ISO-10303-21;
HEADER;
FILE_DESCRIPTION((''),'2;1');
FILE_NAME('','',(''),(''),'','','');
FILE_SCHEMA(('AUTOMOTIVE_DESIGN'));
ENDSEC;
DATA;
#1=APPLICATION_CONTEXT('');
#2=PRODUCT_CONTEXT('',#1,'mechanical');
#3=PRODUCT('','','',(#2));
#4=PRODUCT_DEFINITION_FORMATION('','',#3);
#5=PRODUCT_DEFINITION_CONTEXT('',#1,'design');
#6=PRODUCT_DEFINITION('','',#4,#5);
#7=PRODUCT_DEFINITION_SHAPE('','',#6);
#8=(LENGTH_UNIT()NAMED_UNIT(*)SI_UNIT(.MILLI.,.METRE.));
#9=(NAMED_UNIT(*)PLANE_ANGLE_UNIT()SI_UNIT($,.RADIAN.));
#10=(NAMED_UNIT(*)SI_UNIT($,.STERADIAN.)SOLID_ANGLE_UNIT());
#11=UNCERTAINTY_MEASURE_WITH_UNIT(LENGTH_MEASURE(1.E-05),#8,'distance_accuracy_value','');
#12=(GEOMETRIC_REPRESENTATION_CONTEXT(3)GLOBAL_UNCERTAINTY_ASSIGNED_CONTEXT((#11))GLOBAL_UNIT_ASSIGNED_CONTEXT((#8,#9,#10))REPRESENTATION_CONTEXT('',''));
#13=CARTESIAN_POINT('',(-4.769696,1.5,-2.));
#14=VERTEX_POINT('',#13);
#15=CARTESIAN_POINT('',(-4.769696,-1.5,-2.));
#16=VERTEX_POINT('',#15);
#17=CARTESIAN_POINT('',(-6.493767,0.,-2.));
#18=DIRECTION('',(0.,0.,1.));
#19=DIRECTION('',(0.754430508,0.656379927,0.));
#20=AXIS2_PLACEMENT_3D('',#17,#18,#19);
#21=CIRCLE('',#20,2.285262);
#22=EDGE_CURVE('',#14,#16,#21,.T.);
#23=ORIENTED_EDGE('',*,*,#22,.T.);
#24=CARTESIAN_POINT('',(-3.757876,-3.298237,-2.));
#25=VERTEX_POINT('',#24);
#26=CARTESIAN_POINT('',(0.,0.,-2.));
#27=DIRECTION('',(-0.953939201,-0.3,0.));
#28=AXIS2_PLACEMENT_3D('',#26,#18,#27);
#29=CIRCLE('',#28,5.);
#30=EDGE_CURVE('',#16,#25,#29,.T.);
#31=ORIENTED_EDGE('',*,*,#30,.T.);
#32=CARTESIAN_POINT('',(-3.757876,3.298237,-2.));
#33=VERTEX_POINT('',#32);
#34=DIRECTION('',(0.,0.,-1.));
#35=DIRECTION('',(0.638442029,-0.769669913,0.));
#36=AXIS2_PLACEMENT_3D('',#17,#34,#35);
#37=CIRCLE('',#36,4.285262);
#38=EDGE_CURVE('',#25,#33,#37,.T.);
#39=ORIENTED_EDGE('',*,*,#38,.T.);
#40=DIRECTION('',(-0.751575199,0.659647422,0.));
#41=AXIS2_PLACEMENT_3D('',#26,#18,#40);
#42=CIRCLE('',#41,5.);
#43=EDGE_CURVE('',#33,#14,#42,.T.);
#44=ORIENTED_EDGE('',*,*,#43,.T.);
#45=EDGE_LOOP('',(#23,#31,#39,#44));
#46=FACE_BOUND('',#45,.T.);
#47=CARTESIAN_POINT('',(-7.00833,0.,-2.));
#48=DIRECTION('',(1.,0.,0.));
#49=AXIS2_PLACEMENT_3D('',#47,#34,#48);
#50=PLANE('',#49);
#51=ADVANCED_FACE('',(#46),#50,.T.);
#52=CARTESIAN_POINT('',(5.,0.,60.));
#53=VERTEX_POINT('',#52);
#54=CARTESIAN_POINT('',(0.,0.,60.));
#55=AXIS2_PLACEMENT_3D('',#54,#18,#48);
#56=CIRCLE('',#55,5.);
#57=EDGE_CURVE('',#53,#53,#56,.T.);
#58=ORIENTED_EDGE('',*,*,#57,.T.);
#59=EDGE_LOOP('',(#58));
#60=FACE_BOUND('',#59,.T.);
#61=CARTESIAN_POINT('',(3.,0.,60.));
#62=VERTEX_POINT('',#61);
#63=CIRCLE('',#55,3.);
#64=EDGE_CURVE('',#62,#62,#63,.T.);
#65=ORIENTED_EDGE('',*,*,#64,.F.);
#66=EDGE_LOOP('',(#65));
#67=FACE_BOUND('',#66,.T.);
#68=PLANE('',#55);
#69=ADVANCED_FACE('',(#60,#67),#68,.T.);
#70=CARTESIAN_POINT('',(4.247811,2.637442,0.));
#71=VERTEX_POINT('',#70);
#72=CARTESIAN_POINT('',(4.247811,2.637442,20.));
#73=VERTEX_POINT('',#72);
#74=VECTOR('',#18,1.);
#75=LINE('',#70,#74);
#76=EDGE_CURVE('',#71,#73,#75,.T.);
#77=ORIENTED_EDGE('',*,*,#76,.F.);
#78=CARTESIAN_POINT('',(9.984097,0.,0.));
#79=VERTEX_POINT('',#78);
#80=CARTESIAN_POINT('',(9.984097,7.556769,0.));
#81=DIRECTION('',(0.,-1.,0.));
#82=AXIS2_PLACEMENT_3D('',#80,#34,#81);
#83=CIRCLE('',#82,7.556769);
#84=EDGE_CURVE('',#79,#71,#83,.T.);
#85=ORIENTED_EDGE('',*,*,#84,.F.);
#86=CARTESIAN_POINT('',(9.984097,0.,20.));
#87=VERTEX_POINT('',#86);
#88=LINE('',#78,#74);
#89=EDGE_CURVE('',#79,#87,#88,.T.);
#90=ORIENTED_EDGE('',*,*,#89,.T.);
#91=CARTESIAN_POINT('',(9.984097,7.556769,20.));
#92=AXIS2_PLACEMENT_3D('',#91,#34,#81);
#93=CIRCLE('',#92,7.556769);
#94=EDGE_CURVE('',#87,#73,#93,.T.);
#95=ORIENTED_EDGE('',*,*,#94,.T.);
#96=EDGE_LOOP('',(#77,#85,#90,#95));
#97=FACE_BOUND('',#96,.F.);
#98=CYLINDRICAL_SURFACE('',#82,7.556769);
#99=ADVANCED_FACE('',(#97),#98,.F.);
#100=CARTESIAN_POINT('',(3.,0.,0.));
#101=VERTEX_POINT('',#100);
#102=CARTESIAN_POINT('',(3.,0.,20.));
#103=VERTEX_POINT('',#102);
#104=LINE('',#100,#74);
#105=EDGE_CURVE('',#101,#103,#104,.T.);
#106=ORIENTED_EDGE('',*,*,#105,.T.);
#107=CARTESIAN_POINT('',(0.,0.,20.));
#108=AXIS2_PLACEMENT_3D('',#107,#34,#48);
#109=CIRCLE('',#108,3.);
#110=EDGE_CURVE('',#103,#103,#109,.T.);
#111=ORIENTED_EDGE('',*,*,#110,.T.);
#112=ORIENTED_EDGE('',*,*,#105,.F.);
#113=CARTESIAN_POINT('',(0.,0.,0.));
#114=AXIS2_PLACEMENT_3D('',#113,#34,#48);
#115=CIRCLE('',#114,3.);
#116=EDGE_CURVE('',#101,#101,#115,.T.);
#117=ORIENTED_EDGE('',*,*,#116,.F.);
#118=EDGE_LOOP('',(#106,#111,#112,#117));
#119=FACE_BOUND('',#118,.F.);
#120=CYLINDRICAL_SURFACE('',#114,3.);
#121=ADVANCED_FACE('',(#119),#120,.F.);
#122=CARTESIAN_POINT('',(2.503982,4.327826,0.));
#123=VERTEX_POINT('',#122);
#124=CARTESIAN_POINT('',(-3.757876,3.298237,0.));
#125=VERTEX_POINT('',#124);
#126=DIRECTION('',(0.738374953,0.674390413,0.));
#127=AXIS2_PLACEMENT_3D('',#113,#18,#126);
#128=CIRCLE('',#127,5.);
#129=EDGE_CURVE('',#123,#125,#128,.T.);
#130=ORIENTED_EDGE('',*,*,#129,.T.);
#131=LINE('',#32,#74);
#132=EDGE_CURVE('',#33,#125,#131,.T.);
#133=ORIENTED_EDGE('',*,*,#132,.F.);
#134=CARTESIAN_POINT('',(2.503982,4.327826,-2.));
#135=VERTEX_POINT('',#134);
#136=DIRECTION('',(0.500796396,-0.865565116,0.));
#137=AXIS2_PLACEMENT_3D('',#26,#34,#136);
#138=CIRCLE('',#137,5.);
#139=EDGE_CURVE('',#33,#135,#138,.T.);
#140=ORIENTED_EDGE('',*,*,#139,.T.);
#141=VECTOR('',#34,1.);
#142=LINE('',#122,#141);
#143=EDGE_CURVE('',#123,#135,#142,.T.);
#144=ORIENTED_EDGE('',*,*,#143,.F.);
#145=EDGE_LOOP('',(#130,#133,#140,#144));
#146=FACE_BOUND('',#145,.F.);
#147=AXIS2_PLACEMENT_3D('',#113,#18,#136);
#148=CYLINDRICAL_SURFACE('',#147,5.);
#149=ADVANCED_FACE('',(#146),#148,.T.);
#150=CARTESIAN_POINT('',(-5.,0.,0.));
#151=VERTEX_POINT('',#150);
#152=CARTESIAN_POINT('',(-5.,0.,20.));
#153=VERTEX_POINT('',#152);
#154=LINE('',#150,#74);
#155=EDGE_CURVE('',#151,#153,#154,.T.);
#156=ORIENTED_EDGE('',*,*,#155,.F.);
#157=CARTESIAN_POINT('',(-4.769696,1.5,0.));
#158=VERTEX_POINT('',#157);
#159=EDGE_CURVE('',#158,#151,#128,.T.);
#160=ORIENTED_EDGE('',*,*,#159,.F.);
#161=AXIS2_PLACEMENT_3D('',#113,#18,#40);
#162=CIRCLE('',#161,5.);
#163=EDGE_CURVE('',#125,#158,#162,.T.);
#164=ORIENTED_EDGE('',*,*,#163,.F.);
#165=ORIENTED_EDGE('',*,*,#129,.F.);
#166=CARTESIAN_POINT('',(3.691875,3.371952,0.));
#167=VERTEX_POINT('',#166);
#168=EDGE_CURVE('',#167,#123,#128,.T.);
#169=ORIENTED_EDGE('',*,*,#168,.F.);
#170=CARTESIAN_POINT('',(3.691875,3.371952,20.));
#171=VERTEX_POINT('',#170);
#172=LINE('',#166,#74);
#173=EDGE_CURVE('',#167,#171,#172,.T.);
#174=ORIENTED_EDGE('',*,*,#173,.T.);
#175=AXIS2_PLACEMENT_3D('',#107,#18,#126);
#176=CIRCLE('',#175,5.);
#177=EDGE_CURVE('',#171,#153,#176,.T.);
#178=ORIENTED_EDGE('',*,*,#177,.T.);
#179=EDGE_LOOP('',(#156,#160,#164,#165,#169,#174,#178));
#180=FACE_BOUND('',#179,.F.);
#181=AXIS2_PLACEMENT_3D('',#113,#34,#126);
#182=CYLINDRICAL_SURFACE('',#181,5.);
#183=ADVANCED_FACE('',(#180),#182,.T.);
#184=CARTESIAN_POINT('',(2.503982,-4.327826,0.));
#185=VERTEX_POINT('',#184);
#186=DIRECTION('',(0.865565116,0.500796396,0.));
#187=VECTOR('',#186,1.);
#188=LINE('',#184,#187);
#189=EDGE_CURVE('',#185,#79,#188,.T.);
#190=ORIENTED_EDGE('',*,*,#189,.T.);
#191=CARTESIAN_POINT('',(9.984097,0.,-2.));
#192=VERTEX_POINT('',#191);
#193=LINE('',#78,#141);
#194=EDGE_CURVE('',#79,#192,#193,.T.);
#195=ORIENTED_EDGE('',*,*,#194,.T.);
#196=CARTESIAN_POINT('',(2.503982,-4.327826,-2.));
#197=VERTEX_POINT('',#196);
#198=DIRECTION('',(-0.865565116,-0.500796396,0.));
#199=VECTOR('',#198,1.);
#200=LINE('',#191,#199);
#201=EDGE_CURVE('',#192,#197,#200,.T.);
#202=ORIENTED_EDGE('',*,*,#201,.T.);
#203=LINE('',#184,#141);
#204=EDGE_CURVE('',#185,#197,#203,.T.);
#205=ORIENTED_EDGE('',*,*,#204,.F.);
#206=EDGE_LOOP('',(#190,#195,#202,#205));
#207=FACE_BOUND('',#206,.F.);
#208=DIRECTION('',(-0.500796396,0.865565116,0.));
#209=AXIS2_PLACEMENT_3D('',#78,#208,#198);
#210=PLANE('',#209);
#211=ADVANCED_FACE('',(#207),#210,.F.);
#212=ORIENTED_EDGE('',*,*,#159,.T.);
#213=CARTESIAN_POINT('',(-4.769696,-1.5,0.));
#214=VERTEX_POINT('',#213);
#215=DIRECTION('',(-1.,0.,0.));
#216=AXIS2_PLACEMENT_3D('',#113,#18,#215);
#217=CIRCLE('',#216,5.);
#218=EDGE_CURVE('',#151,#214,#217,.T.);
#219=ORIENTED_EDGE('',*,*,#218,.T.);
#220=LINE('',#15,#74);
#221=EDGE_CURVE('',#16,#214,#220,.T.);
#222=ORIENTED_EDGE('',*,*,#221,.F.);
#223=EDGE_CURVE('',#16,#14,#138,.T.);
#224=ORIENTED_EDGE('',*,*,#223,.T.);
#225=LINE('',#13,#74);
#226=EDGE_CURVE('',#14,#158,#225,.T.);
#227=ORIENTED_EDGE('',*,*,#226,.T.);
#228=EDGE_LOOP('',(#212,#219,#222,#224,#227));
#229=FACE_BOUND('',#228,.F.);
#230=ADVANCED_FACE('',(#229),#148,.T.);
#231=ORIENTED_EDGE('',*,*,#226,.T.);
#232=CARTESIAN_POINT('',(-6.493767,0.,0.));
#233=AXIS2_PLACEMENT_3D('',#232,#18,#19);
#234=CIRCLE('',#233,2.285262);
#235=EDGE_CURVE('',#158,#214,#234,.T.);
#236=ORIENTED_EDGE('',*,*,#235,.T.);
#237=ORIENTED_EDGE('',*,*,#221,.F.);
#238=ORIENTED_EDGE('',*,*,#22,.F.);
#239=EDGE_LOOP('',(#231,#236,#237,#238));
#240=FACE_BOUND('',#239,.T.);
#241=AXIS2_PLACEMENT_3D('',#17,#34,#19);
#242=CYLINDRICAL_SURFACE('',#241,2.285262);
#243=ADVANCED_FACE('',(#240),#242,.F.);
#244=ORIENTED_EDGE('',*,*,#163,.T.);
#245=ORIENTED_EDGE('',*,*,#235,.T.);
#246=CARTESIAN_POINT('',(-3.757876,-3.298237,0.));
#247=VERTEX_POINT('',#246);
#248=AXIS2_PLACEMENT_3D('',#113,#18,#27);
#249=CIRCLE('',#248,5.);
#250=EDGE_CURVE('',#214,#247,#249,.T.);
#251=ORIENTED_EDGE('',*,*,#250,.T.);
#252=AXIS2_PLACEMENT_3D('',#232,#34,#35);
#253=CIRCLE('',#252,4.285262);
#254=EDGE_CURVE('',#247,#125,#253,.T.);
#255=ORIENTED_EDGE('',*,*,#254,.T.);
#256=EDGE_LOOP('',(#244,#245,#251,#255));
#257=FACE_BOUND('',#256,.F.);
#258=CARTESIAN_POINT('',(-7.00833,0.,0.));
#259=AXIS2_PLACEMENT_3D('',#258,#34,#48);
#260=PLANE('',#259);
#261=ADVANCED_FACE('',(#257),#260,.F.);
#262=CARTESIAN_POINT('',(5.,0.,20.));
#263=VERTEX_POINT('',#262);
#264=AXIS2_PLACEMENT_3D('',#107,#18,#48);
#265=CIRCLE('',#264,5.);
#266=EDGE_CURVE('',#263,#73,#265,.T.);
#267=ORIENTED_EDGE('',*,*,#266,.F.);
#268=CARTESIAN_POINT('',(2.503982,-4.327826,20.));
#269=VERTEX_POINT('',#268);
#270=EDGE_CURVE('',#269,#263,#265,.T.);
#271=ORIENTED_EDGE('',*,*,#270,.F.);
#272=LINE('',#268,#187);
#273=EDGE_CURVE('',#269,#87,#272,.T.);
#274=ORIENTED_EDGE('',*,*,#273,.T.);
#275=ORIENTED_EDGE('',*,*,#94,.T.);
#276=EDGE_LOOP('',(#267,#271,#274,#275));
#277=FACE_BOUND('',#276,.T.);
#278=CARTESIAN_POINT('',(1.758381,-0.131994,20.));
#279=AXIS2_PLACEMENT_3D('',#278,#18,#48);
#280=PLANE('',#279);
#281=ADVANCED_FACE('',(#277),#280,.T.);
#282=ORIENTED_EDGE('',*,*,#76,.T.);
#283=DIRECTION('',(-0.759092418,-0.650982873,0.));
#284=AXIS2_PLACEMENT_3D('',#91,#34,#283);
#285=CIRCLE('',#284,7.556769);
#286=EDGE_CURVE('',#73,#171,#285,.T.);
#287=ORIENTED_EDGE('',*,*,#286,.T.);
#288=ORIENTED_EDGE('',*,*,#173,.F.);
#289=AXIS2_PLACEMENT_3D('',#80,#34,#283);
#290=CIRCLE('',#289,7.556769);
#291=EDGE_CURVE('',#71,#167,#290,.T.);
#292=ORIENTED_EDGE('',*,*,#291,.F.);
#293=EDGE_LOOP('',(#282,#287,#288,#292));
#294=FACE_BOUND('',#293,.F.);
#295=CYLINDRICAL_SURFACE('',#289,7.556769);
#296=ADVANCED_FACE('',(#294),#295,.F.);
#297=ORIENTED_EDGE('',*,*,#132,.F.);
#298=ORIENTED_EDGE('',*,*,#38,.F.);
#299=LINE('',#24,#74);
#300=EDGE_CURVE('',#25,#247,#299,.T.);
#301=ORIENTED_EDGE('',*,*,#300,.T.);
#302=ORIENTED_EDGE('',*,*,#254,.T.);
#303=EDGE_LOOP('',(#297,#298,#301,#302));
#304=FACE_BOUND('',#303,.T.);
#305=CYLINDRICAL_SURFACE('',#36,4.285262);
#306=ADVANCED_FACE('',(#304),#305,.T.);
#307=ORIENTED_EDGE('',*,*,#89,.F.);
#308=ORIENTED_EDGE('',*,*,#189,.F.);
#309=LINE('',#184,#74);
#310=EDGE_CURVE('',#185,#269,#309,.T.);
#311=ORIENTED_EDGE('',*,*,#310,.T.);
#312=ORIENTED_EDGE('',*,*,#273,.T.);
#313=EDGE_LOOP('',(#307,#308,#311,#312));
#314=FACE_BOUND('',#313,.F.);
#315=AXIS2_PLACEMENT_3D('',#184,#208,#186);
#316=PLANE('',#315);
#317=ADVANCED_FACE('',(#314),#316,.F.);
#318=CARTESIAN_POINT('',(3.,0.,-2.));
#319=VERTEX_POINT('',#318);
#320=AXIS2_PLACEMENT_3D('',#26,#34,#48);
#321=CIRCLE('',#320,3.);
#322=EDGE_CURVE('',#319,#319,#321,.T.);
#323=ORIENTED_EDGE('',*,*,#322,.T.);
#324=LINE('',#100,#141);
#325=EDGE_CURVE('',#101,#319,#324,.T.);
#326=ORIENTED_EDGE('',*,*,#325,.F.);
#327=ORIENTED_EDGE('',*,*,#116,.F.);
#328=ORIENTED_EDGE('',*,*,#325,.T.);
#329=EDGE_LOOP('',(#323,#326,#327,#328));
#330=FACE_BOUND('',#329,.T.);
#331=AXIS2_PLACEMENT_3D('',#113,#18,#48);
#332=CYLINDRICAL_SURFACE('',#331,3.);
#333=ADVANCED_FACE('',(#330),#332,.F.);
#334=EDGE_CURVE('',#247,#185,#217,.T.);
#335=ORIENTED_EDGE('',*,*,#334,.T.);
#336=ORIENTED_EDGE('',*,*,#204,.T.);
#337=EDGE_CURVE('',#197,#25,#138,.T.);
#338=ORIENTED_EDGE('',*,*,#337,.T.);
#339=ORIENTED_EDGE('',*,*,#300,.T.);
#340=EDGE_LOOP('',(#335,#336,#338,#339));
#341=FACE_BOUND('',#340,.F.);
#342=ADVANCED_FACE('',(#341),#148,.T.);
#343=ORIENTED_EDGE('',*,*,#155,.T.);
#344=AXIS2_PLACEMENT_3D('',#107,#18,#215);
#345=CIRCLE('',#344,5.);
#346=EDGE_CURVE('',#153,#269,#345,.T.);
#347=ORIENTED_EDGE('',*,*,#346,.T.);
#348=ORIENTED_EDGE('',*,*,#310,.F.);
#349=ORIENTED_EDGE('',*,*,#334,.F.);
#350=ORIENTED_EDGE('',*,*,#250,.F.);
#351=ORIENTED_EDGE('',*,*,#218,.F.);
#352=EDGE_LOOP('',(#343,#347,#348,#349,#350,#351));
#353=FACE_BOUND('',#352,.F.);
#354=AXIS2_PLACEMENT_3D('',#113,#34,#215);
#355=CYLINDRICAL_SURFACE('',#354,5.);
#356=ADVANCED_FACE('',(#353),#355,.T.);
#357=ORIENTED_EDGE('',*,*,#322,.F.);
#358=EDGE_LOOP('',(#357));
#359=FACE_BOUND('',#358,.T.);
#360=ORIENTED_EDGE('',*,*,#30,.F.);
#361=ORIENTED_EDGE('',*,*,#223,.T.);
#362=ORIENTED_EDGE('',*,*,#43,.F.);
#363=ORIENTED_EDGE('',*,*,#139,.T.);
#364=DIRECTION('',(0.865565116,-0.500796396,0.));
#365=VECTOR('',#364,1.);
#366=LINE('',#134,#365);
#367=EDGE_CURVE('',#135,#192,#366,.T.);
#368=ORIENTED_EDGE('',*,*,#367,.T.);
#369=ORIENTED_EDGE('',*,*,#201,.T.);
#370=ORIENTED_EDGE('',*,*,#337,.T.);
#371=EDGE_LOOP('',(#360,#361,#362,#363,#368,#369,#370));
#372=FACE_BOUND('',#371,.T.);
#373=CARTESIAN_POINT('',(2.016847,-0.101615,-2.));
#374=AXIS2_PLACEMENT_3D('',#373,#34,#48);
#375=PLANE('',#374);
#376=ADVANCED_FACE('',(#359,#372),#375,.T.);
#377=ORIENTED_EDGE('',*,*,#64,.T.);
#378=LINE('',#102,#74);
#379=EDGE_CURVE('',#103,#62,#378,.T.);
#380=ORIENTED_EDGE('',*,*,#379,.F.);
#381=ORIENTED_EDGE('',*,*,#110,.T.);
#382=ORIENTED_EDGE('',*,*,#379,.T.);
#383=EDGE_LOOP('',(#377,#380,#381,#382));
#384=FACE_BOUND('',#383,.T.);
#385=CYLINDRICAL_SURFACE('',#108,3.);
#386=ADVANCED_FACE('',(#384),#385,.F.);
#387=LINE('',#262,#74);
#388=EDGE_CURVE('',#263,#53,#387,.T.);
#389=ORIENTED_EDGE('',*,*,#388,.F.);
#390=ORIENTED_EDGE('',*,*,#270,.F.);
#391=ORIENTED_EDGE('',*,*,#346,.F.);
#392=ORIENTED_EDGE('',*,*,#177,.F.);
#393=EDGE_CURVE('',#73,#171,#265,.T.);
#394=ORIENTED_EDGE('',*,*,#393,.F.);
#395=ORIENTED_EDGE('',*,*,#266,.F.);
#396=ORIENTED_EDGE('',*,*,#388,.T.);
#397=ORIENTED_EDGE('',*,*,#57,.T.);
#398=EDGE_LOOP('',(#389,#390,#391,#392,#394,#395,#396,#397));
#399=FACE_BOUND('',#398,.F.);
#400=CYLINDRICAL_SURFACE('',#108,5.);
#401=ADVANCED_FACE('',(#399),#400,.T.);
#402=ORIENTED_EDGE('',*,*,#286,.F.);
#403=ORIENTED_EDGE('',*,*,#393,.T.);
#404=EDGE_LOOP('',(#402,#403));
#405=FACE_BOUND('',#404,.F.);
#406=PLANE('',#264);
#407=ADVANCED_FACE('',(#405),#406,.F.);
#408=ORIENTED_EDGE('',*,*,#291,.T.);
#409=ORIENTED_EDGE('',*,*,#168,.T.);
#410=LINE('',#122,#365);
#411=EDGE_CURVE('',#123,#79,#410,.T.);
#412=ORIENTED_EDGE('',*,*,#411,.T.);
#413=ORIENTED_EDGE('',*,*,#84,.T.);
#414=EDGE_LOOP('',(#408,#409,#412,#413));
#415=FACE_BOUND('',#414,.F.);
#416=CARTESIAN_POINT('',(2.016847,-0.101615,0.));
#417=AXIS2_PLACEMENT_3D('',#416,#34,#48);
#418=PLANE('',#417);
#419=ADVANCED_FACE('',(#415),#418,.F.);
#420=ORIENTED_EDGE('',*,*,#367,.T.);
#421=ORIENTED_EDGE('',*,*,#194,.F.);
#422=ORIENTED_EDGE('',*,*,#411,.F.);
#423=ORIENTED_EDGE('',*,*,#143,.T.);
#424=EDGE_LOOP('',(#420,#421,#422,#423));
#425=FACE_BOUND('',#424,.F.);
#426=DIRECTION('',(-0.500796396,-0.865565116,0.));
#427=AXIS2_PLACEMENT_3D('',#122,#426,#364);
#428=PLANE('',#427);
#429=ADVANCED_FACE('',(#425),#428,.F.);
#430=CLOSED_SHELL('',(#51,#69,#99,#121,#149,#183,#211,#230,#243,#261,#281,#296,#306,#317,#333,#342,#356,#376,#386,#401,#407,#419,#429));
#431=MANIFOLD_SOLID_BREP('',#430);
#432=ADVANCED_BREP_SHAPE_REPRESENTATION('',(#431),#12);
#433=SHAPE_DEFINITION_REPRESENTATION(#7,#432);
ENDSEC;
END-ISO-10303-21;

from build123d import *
from build123d import SkipClean  # not in build123d's __all__

# Parameters (mm, degrees)
F1_DEPTH = 20
F2_R     = 5
F2_R_2   = 3
F3_DEPTH = 40
F4_R     = 3
F5_DEPTH = 2
F7_DEPTH = 2


with BuildPart() as f1:
    # F0 (on Top) → F1 (new body)
    with BuildSketch(Plane.XY):
        with BuildLine():
            ThreePointArc((3.6918747639, 3.3719520649), (-1.8084006996, 4.661511226), (-5, 0))
            ThreePointArc((-5, 0), (-2.4980082156, -4.3312763656), (2.503981982, -4.327825578))
            Line((2.503981982, -4.327825578), (9.9840974016, 0))
            ThreePointArc((9.9840974016, 0), (6.8273158844, 0.6909487043), (4.2478112604, 2.637441847))
            ThreePointArc((4.2478112604, 2.637441847), (3.9586403918, 2.9962179106), (3.6918747639, 3.3719520649))
        make_face()
        with BuildLine():
            ThreePointArc((-3, 0), (0, 3), (3, 0))
            ThreePointArc((3, 0), (0, -3), (-3, 0))
        make_face(mode=Mode.SUBTRACT)
    extrude(amount=F1_DEPTH)

    # F2 (on face) → F3 (join)
    with BuildSketch(Plane.XY.offset(20)):
        Circle(F2_R)
        Circle(F2_R_2, mode=Mode.SUBTRACT)
    extrude(amount=F3_DEPTH)

    # F4 (on face) → F5 (join)
    with BuildSketch(Plane(origin=(0, 0, 0), x_dir=(1, 0, 0), z_dir=(0, 0, -1))):
        with BuildLine():
            ThreePointArc((3.6918747639, -3.3719520649), (6.414709273, -0.8961214102), (9.9840974016, 0))
            Line((9.9840974016, 0), (2.503981982, 4.327825578))
            ThreePointArc((2.503981982, 4.327825578), (-5, 0), (2.503981982, -4.327825578))
            ThreePointArc((2.503981982, -4.327825578), (3.1345787192, -3.8954353098), (3.6918747639, -3.3719520649))
        make_face()
        Circle(F4_R, mode=Mode.SUBTRACT)
        with BuildLine():
            Line((2.503981982, -4.327825578), (9.9840974016, 0))
            ThreePointArc((9.9840974016, 0), (6.414709273, -0.8961214102), (3.6918747639, -3.3719520649))
            ThreePointArc((3.6918747639, -3.3719520649), (3.1345787192, -3.8954353098), (2.503981982, -4.327825578))
        make_face()
    with SkipClean():  # cleaning this boolean's faces spoils the solid; the shape is the same uncleaned
        extrude(amount=F5_DEPTH)

    # F6 (on face) → F7 (join)
    with BuildSketch(Plane(origin=(0, 0, -2), x_dir=(1, 0, 0), z_dir=(0, 0, -1))):
        with BuildLine():
            ThreePointArc((-4.7696960071, -1.5), (-8.7790290978, 0), (-4.7696960071, 1.5))
            ThreePointArc((-4.7696960071, 1.5), (-4.3575549598, 2.4518798446), (-3.7578759927, 3.2982371084))
            ThreePointArc((-3.7578759927, 3.2982371084), (-10.7790290978, 0), (-3.7578759927, -3.2982371084))
            ThreePointArc((-3.7578759927, -3.2982371084), (-4.3575549598, -2.4518798446), (-4.7696960071, -1.5))
        make_face()
    with SkipClean():  # cleaning this boolean's faces spoils the solid; the shape is the same uncleaned
        extrude(amount=-F7_DEPTH)


solid = f1.part
